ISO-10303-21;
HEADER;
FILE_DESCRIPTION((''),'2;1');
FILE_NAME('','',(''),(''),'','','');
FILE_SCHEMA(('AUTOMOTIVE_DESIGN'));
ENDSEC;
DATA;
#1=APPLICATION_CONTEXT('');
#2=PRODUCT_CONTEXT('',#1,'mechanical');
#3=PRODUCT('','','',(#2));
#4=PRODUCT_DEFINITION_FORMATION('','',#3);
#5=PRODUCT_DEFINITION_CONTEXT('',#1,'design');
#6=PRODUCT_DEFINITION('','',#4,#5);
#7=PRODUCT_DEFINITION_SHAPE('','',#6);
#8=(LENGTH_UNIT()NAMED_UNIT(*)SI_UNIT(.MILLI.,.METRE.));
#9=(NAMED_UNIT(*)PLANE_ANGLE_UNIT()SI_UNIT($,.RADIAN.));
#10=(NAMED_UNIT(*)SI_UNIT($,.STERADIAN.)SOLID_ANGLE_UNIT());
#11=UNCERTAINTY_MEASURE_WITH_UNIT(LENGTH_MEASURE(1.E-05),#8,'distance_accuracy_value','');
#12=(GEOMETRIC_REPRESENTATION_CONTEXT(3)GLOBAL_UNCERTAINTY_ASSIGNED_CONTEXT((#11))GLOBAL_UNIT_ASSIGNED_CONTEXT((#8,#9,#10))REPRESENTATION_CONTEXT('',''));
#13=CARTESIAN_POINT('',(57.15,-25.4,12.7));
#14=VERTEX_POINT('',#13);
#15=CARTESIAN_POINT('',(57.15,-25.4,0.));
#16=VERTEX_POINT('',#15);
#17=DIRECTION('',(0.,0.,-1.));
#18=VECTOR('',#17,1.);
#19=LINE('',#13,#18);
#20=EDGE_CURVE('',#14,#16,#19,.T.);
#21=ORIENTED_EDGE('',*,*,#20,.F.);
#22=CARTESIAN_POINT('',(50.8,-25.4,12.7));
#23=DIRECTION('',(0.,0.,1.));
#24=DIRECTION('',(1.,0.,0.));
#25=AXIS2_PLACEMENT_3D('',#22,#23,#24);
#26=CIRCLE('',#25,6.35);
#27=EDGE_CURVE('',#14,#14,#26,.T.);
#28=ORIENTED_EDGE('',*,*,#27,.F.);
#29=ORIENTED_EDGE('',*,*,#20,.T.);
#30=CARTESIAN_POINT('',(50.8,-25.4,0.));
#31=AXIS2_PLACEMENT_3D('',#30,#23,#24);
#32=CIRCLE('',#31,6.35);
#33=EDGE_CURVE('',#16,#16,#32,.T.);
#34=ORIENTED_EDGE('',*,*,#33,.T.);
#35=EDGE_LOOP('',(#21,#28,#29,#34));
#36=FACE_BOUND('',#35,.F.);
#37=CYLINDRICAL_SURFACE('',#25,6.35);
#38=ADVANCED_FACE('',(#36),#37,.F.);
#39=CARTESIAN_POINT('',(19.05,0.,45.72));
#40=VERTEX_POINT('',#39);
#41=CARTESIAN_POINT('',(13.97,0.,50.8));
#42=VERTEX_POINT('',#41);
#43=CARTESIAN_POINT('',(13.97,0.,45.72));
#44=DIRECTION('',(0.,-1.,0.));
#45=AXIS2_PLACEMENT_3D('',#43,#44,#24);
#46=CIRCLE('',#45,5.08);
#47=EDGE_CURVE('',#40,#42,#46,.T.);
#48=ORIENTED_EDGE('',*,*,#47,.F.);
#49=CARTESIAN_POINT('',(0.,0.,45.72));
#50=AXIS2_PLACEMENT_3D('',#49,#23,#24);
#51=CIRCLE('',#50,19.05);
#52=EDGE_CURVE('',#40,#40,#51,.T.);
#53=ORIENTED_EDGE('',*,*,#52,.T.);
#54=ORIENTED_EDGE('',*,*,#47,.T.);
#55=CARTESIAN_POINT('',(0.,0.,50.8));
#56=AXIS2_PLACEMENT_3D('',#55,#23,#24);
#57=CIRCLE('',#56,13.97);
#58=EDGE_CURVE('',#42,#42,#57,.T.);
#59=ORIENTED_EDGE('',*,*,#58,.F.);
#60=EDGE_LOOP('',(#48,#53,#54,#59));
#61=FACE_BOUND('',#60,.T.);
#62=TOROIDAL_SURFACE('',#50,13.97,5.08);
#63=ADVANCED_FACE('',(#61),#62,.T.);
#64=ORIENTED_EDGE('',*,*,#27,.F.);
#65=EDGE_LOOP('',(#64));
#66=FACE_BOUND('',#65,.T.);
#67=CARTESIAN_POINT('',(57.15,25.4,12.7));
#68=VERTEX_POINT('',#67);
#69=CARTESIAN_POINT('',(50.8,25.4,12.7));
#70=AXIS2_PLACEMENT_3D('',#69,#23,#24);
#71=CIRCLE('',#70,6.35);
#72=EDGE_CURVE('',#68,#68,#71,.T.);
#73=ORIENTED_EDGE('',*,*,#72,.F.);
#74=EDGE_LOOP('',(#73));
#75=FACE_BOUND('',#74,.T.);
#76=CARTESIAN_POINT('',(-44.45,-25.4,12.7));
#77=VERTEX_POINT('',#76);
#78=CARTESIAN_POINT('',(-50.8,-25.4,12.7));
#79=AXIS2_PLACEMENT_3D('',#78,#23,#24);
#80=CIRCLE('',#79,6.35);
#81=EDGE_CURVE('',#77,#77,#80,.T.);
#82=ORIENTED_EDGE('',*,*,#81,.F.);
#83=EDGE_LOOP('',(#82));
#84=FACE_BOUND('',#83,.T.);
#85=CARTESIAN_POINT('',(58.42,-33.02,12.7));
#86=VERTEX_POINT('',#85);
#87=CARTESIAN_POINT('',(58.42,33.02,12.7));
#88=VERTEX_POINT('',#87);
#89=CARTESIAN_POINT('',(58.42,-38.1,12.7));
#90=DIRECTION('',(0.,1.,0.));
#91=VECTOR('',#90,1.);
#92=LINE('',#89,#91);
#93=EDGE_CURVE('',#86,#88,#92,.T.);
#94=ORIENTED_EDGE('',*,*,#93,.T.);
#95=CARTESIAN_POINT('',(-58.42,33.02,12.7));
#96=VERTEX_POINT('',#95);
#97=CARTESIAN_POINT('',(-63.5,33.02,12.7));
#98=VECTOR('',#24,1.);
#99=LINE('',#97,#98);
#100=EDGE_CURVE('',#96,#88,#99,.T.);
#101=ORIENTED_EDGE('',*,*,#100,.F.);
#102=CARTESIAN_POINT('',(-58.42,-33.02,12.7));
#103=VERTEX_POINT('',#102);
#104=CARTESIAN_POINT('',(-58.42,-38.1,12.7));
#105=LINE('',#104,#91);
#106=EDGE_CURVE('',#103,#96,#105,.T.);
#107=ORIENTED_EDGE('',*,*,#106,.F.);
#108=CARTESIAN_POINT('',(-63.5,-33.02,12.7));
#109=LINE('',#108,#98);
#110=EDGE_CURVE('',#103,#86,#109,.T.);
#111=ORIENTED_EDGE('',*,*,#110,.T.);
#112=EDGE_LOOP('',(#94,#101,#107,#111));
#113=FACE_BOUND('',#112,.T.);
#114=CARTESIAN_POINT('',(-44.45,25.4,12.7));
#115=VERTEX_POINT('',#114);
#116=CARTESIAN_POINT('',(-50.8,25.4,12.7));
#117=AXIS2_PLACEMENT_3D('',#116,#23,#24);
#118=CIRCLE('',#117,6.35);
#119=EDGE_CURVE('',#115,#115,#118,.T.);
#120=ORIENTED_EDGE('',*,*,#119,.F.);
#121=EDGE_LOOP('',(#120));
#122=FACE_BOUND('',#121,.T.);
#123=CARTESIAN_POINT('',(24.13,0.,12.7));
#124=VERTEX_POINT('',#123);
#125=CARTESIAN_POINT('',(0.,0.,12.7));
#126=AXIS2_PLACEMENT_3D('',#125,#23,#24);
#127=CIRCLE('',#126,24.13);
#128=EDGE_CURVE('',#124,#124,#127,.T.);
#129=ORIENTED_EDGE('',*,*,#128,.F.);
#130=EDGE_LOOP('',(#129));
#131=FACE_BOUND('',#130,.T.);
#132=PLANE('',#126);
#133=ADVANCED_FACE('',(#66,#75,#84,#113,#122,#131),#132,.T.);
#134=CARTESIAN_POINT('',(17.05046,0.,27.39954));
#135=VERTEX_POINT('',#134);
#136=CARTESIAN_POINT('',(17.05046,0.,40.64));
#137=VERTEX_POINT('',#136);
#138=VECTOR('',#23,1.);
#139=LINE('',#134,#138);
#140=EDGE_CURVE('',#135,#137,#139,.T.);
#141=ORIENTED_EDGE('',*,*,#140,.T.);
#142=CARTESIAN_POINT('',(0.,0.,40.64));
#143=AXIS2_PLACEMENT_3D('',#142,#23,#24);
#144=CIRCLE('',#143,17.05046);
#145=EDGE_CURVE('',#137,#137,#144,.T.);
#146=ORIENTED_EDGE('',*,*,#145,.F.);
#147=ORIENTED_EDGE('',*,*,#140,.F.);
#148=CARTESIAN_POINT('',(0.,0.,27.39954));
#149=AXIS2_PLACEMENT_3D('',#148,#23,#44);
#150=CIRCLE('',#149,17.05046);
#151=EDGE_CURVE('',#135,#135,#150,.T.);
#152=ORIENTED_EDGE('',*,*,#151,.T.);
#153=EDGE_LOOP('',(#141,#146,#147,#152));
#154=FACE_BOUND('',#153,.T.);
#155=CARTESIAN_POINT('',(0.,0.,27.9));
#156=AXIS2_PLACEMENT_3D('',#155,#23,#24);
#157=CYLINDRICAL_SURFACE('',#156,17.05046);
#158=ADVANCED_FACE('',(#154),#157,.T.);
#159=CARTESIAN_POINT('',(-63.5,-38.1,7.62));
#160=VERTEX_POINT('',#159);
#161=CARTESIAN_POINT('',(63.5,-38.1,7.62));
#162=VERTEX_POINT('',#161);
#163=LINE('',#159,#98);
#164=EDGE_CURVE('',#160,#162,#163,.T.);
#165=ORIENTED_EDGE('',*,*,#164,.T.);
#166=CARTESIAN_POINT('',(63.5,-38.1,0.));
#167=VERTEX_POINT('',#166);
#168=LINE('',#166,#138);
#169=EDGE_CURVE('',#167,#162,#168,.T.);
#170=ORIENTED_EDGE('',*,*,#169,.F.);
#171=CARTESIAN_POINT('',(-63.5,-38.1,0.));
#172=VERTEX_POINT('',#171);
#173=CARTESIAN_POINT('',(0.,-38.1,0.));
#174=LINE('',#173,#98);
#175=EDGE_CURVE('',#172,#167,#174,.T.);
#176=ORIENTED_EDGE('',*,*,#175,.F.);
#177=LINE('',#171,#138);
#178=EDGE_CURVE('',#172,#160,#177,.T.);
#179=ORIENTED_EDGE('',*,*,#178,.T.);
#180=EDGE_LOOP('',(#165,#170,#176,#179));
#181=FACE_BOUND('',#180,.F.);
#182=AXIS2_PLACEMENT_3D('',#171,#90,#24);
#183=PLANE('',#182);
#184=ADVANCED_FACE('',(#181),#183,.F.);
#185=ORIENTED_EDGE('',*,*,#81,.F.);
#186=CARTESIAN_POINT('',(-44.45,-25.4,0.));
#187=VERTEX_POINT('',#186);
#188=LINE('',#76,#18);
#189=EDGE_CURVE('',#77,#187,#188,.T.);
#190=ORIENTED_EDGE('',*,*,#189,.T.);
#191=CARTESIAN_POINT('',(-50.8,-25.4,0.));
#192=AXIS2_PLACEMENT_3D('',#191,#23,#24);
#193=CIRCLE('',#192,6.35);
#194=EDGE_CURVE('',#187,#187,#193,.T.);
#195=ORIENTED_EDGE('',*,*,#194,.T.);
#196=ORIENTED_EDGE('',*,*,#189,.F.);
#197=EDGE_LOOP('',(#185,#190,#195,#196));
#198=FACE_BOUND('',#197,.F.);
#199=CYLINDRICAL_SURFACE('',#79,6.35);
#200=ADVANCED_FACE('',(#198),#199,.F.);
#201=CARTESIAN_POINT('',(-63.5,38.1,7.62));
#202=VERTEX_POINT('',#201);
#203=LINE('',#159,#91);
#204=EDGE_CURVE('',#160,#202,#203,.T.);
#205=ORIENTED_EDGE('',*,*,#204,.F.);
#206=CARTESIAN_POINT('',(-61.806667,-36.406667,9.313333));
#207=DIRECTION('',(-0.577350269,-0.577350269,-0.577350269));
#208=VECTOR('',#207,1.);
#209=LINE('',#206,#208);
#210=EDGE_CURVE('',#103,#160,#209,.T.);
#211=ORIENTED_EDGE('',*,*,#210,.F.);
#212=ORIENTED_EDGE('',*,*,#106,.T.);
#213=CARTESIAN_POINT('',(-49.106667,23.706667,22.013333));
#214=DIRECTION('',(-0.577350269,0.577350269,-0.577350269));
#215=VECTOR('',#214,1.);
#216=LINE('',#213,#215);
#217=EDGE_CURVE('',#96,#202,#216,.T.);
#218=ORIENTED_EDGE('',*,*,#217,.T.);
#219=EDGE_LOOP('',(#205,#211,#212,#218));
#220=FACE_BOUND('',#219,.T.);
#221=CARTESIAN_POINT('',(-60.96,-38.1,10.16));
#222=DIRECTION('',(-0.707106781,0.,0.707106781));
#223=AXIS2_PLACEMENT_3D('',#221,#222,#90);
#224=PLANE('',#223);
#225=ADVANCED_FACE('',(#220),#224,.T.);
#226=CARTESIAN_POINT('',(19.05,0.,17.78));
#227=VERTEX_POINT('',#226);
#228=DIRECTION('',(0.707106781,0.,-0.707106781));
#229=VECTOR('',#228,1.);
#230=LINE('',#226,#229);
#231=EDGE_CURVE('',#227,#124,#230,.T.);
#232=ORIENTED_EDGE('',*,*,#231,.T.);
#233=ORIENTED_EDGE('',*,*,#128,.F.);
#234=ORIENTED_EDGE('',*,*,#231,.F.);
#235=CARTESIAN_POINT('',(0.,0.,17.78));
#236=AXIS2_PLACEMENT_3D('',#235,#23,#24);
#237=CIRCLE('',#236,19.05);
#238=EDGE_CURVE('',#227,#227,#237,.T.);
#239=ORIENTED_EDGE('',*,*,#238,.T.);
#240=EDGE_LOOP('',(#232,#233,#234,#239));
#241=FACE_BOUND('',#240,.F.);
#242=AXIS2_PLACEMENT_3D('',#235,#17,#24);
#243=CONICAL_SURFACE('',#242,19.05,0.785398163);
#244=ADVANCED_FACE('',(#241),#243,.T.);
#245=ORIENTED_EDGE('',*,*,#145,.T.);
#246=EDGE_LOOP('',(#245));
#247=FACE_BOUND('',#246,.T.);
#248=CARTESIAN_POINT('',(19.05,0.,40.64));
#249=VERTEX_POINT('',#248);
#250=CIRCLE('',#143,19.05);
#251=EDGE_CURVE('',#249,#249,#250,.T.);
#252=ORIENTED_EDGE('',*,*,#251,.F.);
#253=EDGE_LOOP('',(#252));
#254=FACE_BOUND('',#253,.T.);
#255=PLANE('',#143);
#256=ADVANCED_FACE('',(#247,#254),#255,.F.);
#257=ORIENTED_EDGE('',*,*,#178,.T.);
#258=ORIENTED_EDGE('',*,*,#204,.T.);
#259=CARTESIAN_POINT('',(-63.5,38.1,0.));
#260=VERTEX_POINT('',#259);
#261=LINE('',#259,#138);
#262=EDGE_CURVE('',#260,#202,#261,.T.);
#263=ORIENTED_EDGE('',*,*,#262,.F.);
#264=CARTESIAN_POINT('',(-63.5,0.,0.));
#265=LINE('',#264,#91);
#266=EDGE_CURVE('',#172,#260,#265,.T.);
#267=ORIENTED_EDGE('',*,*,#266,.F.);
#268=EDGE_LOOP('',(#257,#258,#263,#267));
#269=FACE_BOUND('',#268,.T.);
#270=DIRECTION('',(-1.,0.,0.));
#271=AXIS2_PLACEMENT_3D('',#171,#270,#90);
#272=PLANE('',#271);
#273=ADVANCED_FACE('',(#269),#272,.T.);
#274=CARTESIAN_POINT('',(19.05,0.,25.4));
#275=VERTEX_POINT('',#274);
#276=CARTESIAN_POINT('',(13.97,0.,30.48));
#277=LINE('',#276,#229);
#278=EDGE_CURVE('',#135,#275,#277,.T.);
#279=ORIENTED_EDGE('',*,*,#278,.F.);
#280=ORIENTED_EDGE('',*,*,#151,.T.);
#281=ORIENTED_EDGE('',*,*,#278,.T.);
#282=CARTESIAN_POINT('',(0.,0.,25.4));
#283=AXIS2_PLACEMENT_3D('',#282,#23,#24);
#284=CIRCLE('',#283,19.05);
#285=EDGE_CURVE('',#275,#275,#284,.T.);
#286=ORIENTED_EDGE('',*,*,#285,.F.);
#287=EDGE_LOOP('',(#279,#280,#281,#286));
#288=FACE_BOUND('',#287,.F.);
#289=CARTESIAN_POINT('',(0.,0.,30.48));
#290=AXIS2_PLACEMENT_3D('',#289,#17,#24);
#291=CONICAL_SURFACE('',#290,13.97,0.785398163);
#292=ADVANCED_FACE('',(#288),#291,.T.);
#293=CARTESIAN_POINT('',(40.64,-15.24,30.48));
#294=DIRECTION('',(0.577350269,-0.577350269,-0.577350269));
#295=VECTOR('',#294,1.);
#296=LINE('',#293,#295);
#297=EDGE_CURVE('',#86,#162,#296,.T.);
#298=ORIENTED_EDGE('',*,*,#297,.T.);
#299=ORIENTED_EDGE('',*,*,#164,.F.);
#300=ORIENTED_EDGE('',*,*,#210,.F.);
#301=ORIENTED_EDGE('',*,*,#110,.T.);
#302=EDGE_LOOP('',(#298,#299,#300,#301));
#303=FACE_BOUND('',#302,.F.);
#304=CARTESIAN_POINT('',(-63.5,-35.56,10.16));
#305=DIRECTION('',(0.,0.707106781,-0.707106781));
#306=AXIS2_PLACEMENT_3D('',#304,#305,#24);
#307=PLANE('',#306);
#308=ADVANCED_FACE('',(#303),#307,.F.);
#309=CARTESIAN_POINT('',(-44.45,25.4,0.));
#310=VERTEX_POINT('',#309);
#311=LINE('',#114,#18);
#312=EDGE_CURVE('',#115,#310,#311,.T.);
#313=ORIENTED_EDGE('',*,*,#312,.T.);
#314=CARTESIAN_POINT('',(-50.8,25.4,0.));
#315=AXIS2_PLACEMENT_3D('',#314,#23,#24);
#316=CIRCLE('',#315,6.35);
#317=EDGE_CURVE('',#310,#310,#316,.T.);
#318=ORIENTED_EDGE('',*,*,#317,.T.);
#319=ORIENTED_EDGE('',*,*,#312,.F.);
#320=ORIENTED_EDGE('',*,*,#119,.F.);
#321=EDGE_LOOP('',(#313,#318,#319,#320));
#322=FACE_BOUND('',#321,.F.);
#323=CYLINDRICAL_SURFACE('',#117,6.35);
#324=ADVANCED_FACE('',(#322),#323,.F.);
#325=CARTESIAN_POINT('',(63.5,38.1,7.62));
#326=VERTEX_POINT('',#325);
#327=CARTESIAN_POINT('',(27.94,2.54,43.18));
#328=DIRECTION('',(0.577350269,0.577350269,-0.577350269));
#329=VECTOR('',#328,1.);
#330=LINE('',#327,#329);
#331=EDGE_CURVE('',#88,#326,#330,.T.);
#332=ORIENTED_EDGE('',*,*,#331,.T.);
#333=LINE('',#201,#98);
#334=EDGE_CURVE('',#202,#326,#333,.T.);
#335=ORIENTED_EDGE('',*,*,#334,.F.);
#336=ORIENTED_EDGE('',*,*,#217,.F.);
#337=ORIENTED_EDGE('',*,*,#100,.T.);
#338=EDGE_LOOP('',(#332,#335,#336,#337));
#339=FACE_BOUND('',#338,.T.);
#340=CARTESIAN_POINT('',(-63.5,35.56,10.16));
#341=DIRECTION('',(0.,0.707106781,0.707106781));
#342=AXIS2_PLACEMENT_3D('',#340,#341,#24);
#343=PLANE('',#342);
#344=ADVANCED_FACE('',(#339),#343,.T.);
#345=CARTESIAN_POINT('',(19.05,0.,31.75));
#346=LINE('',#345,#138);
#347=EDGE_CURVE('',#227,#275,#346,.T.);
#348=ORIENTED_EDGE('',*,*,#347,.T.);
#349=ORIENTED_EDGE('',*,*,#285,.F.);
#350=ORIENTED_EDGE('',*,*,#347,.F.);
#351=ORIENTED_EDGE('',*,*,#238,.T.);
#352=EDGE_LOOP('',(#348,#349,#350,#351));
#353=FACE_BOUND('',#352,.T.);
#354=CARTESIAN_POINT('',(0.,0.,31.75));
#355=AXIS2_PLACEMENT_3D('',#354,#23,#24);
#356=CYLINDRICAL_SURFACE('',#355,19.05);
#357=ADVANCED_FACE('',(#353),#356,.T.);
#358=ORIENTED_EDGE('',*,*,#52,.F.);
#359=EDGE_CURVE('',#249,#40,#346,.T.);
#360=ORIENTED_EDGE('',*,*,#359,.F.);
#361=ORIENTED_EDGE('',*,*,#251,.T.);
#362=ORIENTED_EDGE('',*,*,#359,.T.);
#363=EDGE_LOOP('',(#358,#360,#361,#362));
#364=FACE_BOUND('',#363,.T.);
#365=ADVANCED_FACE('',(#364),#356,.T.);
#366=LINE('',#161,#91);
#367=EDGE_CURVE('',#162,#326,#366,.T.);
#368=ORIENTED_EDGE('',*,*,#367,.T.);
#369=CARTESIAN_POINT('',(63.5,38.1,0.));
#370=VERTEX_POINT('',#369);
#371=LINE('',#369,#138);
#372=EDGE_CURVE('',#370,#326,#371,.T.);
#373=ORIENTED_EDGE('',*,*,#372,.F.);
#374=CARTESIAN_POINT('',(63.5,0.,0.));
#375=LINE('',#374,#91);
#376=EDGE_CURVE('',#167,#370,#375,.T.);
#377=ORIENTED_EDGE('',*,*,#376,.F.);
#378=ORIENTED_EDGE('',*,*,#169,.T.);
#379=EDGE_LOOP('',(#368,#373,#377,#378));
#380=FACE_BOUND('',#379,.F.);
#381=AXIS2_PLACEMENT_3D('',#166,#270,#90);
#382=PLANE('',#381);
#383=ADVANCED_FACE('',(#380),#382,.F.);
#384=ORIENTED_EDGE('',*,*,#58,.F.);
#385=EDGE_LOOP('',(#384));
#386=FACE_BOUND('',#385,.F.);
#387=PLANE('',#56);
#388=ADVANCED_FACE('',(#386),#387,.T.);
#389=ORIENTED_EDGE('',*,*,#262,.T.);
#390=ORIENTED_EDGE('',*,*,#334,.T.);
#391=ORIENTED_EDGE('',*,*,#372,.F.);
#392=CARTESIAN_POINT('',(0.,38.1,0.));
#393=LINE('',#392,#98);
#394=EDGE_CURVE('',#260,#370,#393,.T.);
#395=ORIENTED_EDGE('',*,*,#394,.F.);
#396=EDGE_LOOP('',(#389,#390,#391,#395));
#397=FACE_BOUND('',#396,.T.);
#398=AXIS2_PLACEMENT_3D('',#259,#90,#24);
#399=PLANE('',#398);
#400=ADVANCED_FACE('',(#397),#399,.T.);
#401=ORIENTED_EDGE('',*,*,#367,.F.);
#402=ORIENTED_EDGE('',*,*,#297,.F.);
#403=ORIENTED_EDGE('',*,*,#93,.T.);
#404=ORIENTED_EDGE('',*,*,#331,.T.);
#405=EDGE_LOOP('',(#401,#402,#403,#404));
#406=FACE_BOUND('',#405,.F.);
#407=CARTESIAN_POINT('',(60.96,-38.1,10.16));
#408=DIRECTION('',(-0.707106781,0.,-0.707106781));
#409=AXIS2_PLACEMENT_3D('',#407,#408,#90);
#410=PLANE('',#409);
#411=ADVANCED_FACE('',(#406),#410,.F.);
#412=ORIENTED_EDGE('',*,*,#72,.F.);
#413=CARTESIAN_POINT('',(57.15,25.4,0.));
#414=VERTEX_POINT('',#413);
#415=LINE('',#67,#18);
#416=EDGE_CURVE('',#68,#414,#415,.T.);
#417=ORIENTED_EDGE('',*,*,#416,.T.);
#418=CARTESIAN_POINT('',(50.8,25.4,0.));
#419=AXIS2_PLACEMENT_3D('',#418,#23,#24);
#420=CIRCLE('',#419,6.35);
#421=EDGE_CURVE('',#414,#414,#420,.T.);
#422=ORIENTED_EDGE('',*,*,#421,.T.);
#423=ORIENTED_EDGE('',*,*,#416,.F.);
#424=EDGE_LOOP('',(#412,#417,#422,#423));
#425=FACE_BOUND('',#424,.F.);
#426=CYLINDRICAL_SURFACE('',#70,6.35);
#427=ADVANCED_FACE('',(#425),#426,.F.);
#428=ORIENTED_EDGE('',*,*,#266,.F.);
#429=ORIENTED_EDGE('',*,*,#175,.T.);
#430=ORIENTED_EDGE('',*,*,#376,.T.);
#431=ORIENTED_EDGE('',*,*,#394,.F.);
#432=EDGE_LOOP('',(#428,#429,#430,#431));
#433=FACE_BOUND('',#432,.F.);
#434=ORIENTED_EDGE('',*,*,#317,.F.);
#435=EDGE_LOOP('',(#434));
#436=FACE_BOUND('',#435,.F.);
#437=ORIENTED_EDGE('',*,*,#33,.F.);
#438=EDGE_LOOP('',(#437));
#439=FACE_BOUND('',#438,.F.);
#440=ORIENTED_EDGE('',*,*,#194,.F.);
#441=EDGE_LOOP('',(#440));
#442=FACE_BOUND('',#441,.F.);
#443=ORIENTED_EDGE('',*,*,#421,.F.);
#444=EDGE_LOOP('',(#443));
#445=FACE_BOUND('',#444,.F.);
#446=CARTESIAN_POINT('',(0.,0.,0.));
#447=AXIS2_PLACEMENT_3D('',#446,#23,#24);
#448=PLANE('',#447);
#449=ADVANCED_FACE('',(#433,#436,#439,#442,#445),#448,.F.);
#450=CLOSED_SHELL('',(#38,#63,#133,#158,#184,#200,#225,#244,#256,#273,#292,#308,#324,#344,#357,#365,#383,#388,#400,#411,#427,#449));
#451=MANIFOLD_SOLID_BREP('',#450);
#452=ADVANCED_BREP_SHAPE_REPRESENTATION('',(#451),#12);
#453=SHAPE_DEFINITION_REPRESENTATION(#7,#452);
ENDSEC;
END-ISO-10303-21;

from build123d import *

# Parameters (mm, degrees)
F0_W        = 127
F0_H        = 76.2
F1_DEPTH    = 12.7
F2_R        = 6.35
F3_DEPTH    = 12.701
F4_W        = 19.05
F4_H        = 38.1
F6_W        = 6.35
F6_H        = 10.16
F8_R        = 5.08
F9_S7_R     = 17.0504603439
F9_T8_DEPTH = 29
F10_SIZE    = 5.08


# Not quite as in the source:
# - a fillet or chamfer that OpenCascade refuses, or shapes differently, is made with other operations: its cross-section is extruded or revolved along the edge and cut away or added


with BuildPart() as f1:
    # F0 (on Top) → F1 (new body)
    with BuildSketch(Plane.XY):
        Rectangle(F0_W, F0_H)
    extrude(amount=F1_DEPTH)

    # F2 (on face) → F3 (cut, through all)
    with BuildSketch(Plane.XY.offset(12.7)):
        with Locations((50.8, -25.4)):
            Circle(F2_R)
        with Locations((50.8, 25.4)):
            Circle(F2_R)
        with Locations((-50.8, 25.4)):
            Circle(F2_R)
        with Locations((-50.8, -25.4)):
            Circle(F2_R)
    extrude(amount=-F3_DEPTH, mode=Mode.SUBTRACT)

    # F4 (on Front) → F5 (revolve)
    with BuildSketch(Plane.XZ):
        with Locations((9.525, 31.75)):
            Rectangle(F4_W, F4_H)
    revolve(axis=Axis((0, 0, 31.75), (0, 0, 1)))

    # F6 (on Front) → F7 (revolve, cut)
    with BuildSketch(Plane.XZ):
        with Locations((20.2254603439, 35.56)):
            Rectangle(F6_W, F6_H)
    revolve(axis=Axis((0, 0, 50.8), (0, 0, 1)), mode=Mode.SUBTRACT)

    # F8
    f8_edges = [f1.edges().sort_by_distance(p)[0] for p in [
        (-19.05, 0, 50.8),
    ]]
    fillet(f8_edges, radius=F8_R)

    # F9: chamfer of 5.08 on 3 edges, made by hand

    # F9_s1 → F9_t2 (revolve)
    with BuildSketch(Plane.XZ):
        Polygon((19.05, 17.78), (24.13, 12.7), (19.05, 12.7), align=None)
    revolve(axis=Axis((0, 0, 12.7), (0, 0, 1)))


with BuildPart() as f9_tool4:
    # F9_s5 → F9_t6 (revolve)
    with BuildSketch(Plane.XZ):
        Polygon((13.97, 30.48), (19.05, 25.4), (19.05, 30.48), align=None)
    revolve(axis=Axis((0, 0, 30.48), (0, 0, 1)))

    # F9_s7 → F9_t8 (cut, symmetric)
    with BuildSketch(Plane.XY.offset(27.9)):
        Circle(F9_S7_R)
    extrude(amount=F9_T8_DEPTH, both=True, mode=Mode.SUBTRACT)


with BuildPart() as f1_1:
    add(f1.part)

    # F9_t3: cut F9_tool4
    add(f9_tool4.part, mode=Mode.SUBTRACT)

    # F10
    f10_edges = [f1_1.edges().sort_by_distance(p)[0] for p in [
        (0, -38.1, 12.7),
        (63.5, 0, 12.7),
        (0, 38.1, 12.7),
        (-63.5, 0, 12.7),
    ]]
    chamfer(f10_edges, length=F10_SIZE)


solid = f1_1.part
